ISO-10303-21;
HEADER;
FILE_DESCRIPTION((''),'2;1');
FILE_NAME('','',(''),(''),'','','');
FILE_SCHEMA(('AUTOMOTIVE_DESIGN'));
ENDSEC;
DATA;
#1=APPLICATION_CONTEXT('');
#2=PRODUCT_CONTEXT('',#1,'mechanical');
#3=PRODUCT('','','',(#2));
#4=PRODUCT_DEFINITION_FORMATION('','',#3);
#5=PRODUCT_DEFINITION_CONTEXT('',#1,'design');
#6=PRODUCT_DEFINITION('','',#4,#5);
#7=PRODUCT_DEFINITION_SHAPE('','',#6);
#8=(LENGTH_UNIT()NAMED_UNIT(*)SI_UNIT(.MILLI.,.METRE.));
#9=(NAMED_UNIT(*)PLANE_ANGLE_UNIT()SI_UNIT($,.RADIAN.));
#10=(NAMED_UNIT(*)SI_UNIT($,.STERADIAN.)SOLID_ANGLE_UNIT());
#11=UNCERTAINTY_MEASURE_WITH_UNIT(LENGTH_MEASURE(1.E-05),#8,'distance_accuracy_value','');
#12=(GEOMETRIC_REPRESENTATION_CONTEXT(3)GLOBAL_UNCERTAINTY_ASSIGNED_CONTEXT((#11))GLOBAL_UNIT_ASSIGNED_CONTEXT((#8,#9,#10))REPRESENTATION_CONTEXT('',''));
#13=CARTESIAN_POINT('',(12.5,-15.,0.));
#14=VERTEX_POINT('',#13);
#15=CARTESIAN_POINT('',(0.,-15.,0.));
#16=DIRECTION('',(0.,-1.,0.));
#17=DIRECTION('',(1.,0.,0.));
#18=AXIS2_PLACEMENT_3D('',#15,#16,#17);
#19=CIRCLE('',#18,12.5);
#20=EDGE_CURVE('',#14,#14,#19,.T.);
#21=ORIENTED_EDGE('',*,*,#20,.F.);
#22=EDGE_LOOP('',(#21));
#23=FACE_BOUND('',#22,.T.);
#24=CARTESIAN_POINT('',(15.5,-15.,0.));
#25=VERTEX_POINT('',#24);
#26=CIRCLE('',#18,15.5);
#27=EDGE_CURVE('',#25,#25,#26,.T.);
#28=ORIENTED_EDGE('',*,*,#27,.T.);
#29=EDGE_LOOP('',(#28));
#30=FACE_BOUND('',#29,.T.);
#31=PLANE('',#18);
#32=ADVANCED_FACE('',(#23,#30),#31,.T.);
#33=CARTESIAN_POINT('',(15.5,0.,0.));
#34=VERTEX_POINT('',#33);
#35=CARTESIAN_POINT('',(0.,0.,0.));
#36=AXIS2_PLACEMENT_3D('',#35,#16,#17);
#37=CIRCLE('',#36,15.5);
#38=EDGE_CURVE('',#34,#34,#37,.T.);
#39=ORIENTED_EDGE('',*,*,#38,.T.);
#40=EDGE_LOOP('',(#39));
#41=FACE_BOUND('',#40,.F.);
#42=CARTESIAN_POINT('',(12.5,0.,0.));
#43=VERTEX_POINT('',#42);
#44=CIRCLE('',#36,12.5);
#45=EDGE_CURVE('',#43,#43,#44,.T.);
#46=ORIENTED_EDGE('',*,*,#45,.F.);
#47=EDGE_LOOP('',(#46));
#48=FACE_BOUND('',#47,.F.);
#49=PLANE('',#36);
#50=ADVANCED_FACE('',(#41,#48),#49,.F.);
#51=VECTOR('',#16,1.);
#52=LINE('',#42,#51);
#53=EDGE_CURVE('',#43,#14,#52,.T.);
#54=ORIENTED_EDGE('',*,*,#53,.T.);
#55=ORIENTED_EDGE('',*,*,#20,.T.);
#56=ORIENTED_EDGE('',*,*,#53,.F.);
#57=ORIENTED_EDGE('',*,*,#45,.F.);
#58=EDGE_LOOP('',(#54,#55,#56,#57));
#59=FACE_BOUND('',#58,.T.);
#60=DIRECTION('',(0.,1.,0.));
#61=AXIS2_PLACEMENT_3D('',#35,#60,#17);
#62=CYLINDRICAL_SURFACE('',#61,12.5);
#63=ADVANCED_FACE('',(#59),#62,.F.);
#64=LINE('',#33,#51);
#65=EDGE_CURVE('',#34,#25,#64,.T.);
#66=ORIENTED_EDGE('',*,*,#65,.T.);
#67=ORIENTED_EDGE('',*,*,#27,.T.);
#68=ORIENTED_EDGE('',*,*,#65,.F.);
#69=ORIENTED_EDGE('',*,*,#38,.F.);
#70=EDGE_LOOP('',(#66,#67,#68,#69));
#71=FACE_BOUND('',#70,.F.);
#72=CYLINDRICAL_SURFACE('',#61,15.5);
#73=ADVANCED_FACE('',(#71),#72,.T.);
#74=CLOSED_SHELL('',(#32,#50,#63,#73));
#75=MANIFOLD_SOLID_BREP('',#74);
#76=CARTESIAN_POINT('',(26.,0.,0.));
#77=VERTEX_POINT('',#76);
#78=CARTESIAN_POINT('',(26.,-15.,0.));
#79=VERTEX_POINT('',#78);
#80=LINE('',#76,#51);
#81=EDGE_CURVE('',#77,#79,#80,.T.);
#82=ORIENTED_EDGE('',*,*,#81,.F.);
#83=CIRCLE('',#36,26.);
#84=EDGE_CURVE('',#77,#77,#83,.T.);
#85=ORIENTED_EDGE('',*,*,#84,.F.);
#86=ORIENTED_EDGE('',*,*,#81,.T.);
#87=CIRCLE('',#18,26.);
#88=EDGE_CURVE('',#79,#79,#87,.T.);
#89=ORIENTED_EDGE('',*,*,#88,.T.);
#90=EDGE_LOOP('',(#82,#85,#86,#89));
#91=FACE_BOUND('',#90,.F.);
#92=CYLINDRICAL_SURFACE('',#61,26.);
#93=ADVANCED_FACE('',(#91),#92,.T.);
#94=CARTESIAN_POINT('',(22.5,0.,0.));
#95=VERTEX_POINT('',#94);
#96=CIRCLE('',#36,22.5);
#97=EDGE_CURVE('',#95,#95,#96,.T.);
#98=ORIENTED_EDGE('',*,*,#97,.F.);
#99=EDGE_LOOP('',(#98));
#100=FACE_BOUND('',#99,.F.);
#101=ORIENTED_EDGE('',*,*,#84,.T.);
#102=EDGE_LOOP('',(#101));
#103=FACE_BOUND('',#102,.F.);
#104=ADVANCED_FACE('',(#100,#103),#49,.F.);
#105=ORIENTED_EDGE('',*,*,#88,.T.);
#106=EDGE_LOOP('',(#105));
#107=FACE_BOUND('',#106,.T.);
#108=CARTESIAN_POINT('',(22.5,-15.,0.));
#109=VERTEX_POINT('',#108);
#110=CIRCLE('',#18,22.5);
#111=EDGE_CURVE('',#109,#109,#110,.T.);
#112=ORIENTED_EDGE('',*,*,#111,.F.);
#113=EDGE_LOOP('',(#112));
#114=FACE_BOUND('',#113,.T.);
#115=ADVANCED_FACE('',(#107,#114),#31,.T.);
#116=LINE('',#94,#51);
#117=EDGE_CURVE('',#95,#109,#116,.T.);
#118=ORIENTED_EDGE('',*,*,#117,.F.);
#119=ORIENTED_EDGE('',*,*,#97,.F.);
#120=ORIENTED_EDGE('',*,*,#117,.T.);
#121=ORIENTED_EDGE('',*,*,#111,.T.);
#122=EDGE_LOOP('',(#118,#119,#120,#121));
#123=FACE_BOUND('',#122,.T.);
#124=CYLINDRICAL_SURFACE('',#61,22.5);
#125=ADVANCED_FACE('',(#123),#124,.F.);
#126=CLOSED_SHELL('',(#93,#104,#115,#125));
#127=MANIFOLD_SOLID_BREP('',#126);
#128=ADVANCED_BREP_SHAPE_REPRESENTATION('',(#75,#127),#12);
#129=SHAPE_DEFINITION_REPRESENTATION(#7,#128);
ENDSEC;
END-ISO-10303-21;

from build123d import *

# Parameters (mm, degrees)
F0_R     = 15.5
F0_R_2   = 12.5
F1_DEPTH = 15
F0_R_3   = 26
F0_R_4   = 22.5


# Not quite as in the source:
# - a feature of the source that left no trace in its solid (it failed there, or was rolled back) is left out


with BuildPart() as f1:
    # F0 (on Front) → F1 (new body)
    with BuildSketch(Plane.XZ):
        Circle(F0_R)
        Circle(F0_R_2, mode=Mode.SUBTRACT)
    extrude(amount=F1_DEPTH)


with BuildPart() as f1b:
    # F0 (on Front) → F1, piece 2 (new body)
    with BuildSketch(Plane.XZ):
        Circle(F0_R_3)
        Circle(F0_R_4, mode=Mode.SUBTRACT)
    extrude(amount=F1_DEPTH)


solid = Compound([f1.part, f1b.part])
